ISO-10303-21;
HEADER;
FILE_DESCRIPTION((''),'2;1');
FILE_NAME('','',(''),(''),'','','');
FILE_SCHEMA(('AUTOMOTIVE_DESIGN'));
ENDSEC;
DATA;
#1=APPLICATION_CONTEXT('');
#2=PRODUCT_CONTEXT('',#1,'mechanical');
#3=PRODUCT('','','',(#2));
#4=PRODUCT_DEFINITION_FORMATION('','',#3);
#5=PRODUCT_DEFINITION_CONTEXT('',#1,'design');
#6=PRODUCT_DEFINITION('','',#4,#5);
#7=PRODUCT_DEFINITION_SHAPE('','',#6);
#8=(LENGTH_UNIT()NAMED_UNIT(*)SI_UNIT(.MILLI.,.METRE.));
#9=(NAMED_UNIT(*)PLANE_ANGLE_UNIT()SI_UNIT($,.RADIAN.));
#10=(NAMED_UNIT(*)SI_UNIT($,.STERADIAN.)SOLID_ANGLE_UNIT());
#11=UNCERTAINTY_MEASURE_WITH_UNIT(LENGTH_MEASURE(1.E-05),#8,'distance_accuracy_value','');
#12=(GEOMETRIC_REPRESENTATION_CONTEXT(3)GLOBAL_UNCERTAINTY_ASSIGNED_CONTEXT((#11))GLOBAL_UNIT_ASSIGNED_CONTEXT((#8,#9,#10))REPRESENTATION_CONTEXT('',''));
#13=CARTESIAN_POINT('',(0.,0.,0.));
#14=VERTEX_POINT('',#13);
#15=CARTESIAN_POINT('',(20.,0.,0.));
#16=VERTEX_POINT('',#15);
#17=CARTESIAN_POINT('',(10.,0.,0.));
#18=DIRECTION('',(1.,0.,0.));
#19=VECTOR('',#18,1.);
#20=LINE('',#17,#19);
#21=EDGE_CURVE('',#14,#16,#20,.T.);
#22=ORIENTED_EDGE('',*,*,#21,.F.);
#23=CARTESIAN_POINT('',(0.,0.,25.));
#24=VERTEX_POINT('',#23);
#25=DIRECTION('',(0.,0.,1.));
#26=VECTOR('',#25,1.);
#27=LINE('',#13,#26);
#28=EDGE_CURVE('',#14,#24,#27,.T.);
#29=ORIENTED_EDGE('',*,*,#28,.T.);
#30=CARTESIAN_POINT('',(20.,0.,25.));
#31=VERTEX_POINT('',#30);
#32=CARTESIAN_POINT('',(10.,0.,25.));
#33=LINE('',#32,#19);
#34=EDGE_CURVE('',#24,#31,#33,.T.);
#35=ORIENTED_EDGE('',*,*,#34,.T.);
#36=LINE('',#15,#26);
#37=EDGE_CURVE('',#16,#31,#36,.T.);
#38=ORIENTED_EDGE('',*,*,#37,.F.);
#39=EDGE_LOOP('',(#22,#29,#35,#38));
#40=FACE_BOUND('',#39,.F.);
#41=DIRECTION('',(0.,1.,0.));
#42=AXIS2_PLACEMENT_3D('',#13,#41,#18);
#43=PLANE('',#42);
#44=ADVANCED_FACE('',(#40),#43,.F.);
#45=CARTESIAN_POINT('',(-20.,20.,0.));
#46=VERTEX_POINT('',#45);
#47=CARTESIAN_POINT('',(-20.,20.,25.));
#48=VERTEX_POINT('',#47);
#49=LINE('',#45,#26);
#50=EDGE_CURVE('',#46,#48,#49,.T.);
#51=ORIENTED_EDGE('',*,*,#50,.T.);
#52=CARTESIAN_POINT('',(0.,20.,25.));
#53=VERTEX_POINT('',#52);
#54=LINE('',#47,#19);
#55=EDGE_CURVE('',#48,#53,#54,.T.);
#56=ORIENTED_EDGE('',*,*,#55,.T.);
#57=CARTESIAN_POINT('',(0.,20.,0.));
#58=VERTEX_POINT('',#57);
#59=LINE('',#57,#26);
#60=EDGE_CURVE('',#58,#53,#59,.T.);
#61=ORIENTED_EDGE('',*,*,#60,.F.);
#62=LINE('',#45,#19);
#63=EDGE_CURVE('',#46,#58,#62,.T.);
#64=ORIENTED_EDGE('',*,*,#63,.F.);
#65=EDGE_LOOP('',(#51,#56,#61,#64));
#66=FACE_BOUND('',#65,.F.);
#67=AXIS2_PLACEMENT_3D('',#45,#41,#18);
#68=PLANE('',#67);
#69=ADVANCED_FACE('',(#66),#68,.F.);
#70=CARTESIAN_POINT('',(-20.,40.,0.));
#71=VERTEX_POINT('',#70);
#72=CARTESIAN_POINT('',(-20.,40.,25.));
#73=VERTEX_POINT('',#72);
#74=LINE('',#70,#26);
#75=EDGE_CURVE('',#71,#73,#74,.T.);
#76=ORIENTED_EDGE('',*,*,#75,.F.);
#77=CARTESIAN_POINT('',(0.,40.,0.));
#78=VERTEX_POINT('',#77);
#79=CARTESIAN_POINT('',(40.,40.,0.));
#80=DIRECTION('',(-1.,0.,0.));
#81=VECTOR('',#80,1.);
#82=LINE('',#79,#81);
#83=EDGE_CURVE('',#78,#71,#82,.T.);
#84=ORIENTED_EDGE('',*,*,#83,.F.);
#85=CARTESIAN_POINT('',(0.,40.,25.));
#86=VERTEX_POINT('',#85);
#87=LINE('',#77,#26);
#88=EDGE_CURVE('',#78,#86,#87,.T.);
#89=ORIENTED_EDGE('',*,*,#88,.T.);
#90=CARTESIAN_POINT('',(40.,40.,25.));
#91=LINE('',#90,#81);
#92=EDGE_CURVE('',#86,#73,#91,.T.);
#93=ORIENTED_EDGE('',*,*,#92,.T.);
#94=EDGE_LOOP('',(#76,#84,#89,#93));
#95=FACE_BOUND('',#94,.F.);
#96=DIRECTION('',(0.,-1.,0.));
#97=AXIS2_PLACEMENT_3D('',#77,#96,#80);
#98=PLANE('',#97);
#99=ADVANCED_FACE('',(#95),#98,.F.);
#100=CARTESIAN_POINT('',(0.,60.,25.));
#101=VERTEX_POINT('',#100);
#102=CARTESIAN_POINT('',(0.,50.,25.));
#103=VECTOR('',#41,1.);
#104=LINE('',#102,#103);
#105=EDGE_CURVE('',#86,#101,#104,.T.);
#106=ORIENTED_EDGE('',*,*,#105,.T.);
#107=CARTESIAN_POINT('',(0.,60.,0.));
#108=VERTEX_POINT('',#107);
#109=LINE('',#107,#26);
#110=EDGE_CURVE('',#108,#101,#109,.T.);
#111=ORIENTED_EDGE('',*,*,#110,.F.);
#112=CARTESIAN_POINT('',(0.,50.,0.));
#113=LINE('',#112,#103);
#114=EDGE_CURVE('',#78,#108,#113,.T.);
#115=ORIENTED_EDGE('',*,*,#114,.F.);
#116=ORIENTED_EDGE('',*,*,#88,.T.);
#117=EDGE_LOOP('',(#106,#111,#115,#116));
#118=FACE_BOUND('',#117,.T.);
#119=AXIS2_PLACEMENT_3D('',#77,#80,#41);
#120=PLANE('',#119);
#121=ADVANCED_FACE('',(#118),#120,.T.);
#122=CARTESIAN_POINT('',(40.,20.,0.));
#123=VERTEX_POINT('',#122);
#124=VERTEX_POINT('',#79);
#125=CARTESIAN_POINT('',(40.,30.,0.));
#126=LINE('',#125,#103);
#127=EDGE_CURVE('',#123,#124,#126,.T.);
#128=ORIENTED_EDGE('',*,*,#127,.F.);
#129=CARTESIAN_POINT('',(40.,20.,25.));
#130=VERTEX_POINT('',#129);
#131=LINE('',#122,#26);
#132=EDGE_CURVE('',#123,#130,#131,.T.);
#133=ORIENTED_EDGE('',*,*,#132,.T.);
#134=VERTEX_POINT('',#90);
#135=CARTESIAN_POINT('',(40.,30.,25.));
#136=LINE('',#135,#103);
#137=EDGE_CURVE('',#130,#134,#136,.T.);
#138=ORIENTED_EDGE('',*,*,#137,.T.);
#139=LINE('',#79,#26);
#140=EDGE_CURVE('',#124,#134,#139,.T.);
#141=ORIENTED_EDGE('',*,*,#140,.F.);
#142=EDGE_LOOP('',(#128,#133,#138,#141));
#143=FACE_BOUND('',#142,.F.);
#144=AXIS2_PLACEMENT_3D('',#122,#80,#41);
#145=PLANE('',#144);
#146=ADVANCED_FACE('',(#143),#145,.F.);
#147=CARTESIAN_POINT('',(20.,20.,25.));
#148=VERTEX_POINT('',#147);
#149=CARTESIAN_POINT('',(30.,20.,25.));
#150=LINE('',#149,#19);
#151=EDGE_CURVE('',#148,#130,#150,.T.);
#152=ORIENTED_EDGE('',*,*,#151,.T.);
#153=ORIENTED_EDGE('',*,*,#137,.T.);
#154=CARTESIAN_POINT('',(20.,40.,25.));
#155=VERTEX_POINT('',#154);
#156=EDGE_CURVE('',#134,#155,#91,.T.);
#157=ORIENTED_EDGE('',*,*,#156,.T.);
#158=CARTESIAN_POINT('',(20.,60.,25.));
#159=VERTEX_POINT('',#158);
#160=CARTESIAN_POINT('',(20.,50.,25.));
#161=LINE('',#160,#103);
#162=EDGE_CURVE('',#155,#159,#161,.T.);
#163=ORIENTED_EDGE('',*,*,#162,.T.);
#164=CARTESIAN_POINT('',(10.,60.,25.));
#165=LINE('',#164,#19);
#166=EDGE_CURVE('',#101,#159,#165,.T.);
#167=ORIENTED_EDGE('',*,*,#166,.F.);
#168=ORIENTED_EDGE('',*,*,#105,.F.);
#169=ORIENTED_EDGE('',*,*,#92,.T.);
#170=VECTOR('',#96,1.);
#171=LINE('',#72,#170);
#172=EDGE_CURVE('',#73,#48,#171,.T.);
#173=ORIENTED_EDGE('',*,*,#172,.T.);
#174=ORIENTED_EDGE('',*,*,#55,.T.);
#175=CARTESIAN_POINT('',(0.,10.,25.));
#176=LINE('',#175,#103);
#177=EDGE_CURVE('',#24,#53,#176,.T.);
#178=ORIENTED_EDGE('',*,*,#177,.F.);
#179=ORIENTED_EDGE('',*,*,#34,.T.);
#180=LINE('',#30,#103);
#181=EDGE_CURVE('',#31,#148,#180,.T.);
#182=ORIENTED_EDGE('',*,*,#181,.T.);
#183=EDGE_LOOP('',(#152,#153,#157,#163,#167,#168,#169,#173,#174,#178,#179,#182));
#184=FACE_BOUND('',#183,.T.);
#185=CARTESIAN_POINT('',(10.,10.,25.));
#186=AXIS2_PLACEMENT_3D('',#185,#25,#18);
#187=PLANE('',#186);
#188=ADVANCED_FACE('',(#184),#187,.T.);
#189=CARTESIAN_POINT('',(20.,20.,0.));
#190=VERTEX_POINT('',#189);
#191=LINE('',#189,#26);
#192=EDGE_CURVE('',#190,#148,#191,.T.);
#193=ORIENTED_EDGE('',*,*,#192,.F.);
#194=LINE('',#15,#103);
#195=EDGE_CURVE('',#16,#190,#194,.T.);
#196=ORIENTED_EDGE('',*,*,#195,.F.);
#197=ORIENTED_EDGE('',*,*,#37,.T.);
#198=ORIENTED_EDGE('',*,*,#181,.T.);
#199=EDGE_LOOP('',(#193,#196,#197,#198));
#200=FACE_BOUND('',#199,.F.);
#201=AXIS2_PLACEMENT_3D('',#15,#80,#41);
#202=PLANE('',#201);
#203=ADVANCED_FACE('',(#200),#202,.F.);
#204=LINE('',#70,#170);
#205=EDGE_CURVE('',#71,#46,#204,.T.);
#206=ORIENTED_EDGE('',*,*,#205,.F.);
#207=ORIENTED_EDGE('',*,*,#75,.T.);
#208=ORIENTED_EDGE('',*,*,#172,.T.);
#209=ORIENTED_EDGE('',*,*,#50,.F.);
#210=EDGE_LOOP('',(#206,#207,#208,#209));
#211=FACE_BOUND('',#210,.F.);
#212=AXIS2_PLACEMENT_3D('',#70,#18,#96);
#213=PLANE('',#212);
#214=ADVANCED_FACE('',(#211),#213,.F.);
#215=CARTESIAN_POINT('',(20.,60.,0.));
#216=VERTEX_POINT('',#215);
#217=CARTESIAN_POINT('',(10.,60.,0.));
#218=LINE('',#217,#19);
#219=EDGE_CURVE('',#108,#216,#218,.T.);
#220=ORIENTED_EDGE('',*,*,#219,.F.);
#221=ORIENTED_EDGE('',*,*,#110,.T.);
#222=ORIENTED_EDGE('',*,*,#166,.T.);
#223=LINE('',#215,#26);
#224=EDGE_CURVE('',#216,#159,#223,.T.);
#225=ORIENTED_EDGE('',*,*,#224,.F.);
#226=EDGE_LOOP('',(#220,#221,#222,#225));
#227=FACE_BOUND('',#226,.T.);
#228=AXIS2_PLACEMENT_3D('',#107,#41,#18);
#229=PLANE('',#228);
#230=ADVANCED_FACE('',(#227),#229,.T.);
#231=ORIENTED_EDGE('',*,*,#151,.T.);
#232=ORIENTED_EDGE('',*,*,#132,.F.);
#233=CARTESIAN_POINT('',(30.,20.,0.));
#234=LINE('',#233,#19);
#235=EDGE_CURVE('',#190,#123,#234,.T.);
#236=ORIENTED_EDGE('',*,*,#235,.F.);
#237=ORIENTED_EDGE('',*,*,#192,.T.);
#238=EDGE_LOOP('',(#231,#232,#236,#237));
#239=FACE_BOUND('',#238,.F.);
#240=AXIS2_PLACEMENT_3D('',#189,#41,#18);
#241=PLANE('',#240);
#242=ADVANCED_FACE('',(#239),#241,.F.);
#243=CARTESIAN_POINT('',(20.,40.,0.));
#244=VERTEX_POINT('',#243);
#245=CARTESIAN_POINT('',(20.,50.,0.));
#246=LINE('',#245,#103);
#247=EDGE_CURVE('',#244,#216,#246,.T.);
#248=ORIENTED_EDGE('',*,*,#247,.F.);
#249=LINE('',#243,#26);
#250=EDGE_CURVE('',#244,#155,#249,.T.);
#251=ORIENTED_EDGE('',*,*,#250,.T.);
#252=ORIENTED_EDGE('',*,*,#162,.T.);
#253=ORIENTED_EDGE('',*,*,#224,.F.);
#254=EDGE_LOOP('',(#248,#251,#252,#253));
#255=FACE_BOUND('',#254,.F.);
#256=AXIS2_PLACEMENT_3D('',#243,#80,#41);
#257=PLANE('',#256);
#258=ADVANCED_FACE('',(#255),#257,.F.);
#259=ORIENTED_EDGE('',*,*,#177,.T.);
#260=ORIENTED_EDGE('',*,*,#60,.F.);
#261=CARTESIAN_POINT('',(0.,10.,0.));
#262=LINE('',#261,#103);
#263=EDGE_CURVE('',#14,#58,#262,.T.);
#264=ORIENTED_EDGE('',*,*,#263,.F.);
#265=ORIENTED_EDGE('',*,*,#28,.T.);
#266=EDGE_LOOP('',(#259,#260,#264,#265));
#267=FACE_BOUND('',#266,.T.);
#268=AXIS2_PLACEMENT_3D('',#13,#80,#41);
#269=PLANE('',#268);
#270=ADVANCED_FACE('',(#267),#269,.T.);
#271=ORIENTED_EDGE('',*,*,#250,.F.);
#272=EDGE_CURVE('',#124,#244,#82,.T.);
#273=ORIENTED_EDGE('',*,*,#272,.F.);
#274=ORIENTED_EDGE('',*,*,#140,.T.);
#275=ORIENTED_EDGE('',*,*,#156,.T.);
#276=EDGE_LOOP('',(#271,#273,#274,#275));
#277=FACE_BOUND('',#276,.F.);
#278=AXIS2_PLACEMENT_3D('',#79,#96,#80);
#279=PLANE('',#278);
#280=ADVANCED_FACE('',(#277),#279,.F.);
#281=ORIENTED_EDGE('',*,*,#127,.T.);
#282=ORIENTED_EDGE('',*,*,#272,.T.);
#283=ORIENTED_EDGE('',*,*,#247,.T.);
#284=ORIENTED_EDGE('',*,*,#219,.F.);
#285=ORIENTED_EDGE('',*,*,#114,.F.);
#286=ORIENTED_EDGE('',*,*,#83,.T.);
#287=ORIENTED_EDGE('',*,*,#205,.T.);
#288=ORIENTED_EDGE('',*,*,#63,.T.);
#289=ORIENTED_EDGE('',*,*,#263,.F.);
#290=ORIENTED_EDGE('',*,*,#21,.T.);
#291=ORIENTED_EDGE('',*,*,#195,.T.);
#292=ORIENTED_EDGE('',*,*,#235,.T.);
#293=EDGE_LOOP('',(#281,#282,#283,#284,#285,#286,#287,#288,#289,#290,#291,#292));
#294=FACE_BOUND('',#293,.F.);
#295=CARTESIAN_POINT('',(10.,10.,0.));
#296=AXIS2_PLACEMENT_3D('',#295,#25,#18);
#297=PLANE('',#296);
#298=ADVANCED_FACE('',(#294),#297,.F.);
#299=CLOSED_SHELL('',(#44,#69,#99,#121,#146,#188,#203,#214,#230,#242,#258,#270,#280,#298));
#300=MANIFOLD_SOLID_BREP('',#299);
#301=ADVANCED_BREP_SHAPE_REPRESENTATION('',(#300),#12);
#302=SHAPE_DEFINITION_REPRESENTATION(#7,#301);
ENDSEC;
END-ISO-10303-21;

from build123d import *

# Parameters (mm, degrees)
F0_W     = 20
F0_H     = 20
F1_DEPTH = 25


with BuildPart() as f1:
    # F0 (on Top) → F1 (new body)
    with BuildSketch(Plane.XY):
        with Locations((10, 10)):
            Rectangle(F0_W, F0_H)
        Polygon((-20, 20), (0, 20), (0, 30), (0, 40), (-20, 40), align=None)
        Polygon((0, 30), (0, 20), (20, 20), (20, 40), (0, 40), align=None)
        with Locations((30, 30)):
            Rectangle(F0_W, F0_H)
        with Locations((10, 50)):
            Rectangle(F0_W, F0_H)
    extrude(amount=F1_DEPTH)


solid = f1.part
